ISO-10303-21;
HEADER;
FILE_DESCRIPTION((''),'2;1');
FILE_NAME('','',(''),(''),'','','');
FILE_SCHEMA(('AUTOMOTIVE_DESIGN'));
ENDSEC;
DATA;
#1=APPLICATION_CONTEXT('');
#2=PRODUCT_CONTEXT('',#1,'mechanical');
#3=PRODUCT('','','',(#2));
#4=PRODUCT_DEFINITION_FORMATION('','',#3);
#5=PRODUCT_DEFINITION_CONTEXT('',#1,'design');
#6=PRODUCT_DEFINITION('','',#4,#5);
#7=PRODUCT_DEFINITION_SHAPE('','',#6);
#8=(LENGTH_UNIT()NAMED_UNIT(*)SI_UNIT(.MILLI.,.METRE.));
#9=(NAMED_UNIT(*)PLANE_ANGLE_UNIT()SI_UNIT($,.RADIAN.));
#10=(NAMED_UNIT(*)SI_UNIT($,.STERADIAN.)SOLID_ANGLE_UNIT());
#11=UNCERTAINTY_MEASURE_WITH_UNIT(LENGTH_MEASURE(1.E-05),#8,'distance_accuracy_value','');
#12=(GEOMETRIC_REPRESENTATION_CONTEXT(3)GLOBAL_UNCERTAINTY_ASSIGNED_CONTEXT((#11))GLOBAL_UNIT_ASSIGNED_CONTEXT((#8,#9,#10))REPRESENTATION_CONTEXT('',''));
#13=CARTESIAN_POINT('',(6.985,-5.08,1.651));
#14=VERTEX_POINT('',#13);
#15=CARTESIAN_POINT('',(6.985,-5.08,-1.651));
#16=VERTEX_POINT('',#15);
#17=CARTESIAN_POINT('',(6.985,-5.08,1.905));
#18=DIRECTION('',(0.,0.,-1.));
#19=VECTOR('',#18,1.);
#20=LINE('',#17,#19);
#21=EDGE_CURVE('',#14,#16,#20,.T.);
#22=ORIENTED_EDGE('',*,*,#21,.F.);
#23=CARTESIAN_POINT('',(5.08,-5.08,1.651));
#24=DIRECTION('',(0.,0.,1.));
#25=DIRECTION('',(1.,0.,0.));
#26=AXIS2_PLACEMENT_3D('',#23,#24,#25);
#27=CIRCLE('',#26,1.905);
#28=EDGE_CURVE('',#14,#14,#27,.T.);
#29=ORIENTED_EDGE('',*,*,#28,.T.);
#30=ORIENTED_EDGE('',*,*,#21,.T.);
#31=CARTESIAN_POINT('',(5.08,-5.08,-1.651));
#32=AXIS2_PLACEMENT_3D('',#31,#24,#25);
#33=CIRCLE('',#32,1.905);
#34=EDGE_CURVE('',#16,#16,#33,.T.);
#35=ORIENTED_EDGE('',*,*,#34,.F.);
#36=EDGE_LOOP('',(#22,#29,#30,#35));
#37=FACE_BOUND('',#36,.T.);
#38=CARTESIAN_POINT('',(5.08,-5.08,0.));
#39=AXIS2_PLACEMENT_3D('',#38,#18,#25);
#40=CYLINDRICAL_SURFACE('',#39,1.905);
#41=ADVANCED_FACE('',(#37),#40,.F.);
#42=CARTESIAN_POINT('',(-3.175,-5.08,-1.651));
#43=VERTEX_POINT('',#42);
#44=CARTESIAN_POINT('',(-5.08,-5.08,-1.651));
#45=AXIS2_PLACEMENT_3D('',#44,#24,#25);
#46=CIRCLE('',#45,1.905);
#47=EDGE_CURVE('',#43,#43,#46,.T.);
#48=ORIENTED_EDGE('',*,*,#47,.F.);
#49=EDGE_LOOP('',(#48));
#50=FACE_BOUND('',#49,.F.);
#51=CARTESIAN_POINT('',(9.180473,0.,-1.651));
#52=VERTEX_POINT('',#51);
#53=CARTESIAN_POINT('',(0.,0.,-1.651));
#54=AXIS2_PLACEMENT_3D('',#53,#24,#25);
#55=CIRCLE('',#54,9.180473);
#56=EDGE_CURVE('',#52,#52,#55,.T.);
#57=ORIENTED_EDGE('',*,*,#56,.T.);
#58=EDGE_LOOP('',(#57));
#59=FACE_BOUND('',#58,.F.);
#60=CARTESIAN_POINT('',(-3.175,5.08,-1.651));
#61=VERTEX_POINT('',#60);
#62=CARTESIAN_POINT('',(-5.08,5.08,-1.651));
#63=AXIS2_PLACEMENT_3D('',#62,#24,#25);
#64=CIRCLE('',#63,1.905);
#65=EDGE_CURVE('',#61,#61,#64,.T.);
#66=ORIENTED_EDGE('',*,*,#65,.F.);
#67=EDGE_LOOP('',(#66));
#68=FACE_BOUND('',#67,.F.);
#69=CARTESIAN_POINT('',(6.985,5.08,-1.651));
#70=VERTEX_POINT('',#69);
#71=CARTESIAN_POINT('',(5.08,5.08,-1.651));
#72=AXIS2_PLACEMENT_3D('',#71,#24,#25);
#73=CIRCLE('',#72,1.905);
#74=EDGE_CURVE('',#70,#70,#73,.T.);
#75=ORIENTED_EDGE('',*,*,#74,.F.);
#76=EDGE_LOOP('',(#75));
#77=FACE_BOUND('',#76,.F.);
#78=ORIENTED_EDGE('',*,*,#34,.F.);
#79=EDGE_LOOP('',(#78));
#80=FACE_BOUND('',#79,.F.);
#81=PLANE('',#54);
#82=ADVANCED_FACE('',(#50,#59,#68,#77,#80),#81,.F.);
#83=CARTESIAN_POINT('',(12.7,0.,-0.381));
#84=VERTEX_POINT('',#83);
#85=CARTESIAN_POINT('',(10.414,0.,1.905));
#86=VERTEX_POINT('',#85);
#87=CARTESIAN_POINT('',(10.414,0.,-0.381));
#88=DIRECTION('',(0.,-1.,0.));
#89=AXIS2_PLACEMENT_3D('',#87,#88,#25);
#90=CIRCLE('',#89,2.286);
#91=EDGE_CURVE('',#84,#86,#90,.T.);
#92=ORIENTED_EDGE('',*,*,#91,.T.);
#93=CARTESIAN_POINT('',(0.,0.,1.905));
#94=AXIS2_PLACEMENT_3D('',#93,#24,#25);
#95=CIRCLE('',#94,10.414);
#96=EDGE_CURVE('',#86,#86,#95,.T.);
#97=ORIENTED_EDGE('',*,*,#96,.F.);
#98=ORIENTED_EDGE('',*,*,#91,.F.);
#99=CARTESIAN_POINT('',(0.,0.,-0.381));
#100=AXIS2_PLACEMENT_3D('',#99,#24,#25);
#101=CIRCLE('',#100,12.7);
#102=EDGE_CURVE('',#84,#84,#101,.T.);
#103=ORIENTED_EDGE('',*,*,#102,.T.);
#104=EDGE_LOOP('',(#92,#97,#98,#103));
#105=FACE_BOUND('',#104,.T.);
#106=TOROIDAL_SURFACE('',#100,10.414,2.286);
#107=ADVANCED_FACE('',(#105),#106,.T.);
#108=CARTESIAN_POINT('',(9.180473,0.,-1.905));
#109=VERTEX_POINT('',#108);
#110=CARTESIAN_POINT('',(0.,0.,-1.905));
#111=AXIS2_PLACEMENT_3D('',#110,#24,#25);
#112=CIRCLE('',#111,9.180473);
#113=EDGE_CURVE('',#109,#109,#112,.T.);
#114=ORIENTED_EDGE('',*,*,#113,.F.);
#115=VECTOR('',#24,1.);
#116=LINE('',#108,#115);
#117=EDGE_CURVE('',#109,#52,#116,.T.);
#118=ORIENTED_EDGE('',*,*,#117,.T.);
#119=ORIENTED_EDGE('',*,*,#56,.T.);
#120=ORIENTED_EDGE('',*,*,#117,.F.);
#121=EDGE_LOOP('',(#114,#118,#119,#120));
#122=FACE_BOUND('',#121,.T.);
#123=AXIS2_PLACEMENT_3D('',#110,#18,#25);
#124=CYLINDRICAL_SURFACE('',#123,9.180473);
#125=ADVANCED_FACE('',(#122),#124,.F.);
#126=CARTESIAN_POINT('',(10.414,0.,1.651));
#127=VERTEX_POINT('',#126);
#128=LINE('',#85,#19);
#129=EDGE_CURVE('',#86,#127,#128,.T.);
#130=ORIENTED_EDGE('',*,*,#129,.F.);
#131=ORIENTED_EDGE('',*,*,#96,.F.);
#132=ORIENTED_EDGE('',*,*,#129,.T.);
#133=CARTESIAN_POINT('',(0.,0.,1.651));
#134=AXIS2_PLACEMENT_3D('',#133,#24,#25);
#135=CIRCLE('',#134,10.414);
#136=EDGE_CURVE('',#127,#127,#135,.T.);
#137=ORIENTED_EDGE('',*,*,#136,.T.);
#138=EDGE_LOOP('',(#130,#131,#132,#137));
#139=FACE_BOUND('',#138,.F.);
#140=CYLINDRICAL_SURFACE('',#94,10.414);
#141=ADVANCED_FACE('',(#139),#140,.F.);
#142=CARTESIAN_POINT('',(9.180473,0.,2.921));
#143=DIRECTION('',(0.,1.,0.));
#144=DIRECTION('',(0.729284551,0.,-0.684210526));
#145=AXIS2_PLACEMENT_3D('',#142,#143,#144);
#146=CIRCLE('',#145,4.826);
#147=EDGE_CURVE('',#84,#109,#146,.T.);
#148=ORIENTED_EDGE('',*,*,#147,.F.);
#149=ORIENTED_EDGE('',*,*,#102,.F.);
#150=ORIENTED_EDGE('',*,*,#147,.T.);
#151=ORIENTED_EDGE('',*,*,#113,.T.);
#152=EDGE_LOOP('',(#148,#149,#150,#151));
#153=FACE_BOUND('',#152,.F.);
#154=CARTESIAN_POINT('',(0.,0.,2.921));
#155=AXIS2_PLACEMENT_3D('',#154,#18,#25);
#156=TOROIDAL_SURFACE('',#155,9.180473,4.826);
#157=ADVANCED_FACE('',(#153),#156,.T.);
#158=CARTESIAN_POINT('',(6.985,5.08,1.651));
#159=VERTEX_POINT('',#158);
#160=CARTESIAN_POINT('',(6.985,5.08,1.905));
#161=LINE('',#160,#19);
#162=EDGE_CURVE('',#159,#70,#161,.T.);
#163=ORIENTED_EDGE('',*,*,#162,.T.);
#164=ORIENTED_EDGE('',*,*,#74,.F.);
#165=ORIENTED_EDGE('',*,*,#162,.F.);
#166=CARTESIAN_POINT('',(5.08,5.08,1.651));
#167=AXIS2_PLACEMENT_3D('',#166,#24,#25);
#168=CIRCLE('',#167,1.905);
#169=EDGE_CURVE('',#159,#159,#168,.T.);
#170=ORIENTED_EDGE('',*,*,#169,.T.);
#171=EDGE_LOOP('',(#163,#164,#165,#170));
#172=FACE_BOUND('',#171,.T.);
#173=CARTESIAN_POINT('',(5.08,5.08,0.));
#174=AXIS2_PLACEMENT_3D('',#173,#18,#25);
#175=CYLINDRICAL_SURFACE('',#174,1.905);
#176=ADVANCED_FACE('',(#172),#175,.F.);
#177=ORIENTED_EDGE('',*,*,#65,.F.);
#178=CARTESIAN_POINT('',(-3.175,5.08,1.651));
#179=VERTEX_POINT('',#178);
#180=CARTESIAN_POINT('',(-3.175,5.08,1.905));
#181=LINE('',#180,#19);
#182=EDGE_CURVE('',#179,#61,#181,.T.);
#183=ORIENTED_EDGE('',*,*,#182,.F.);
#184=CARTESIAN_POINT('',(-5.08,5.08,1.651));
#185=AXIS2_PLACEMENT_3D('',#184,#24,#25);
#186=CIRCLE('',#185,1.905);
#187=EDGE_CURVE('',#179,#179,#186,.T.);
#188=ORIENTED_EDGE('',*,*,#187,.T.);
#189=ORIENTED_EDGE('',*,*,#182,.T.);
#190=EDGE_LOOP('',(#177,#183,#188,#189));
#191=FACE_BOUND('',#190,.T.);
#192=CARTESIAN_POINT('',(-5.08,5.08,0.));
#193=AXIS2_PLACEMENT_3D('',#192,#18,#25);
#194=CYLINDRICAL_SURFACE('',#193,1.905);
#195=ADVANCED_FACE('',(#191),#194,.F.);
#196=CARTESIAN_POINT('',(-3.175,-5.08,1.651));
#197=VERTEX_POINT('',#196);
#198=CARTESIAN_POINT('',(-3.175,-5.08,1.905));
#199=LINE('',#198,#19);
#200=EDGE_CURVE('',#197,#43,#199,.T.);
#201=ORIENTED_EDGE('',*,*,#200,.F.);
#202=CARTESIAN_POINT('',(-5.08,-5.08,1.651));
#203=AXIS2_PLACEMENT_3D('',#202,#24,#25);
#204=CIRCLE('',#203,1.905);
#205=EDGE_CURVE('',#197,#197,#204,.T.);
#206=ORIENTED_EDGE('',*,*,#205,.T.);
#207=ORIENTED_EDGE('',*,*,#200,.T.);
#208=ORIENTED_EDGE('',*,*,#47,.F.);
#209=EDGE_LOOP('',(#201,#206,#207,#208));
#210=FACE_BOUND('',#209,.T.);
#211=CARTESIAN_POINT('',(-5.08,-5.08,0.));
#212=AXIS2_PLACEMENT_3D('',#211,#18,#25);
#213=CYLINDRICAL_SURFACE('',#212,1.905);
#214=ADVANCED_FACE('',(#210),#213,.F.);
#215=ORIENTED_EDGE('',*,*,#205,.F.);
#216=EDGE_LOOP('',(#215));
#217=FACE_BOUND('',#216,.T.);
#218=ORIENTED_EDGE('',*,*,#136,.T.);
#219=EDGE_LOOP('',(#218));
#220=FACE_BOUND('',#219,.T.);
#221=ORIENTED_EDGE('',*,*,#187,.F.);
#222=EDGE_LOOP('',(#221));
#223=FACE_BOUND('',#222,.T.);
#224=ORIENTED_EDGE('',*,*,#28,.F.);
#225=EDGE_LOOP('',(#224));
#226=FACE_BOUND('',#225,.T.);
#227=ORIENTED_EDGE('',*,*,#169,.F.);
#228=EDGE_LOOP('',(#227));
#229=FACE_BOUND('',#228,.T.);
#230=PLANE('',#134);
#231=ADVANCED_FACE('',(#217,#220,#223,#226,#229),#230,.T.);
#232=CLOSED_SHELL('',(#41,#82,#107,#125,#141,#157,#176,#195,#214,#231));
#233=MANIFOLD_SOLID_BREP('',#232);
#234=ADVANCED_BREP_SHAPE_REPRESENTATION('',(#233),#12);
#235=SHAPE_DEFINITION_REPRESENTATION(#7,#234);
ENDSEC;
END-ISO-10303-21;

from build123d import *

# Parameters (mm, degrees)
F0_R     = 12.7
F0_R_2   = 1.905
F1_DEPTH = 1.905
F2_R     = 2.286
F4_DEPTH = 0.254
F5_DEPTH = 0.254


# Not quite as in the source:
# - a fillet or chamfer that OpenCascade refuses, or shapes differently, is made with other operations: its cross-section is extruded or revolved along the edge and cut away or added


with BuildPart() as f1:
    # F0 (on Top) → F1 (new body, symmetric)
    with BuildSketch(Plane.XY):
        Circle(F0_R)
        with Locations((-5.08, -5.08)):
            Circle(F0_R_2, mode=Mode.SUBTRACT)
        with Locations((5.08, -5.08)):
            Circle(F0_R_2, mode=Mode.SUBTRACT)
        with Locations((-5.08, 5.08)):
            Circle(F0_R_2, mode=Mode.SUBTRACT)
        with Locations((5.08, 5.08)):
            Circle(F0_R_2, mode=Mode.SUBTRACT)
    extrude(amount=F1_DEPTH, both=True)

    # F2
    f2_edges = [f1.edges().sort_by_distance(p)[0] for p in [
        (-12.7, 0, 1.905),
    ]]
    fillet(f2_edges, radius=F2_R)

    # F3: fillet of radius 4.826 on 1 edges, made by hand

    # F3_s1 → F3_t2 (revolve, cut)
    with BuildSketch(Plane.XZ):
        with BuildLine():
            ThreePointArc((12.7, -0.381), (11.0981307056, -1.5076413266), (9.180472759, -1.905))
            Line((9.180472759, -1.905), (12.7, -1.905))
            Line((12.7, -1.905), (12.7, -0.381))
        make_face()
    revolve(axis=Axis((0, 0, -1.905), (0, 0, 1)), mode=Mode.SUBTRACT)

    # F4 (cut): a face of the model
    f4_faces = [f1.faces().sort_by_distance(p)[0] for p in [
        (0, 0, 1.905),
    ]]
    extrude(f4_faces, amount=-F4_DEPTH, mode=Mode.SUBTRACT)

    # F5 (cut): a face of the model
    f5_faces = [f1.faces().sort_by_distance(p)[0] for p in [
        (0, 0, -1.905),
    ]]
    extrude(f5_faces, amount=-F5_DEPTH, mode=Mode.SUBTRACT)


solid = f1.part
